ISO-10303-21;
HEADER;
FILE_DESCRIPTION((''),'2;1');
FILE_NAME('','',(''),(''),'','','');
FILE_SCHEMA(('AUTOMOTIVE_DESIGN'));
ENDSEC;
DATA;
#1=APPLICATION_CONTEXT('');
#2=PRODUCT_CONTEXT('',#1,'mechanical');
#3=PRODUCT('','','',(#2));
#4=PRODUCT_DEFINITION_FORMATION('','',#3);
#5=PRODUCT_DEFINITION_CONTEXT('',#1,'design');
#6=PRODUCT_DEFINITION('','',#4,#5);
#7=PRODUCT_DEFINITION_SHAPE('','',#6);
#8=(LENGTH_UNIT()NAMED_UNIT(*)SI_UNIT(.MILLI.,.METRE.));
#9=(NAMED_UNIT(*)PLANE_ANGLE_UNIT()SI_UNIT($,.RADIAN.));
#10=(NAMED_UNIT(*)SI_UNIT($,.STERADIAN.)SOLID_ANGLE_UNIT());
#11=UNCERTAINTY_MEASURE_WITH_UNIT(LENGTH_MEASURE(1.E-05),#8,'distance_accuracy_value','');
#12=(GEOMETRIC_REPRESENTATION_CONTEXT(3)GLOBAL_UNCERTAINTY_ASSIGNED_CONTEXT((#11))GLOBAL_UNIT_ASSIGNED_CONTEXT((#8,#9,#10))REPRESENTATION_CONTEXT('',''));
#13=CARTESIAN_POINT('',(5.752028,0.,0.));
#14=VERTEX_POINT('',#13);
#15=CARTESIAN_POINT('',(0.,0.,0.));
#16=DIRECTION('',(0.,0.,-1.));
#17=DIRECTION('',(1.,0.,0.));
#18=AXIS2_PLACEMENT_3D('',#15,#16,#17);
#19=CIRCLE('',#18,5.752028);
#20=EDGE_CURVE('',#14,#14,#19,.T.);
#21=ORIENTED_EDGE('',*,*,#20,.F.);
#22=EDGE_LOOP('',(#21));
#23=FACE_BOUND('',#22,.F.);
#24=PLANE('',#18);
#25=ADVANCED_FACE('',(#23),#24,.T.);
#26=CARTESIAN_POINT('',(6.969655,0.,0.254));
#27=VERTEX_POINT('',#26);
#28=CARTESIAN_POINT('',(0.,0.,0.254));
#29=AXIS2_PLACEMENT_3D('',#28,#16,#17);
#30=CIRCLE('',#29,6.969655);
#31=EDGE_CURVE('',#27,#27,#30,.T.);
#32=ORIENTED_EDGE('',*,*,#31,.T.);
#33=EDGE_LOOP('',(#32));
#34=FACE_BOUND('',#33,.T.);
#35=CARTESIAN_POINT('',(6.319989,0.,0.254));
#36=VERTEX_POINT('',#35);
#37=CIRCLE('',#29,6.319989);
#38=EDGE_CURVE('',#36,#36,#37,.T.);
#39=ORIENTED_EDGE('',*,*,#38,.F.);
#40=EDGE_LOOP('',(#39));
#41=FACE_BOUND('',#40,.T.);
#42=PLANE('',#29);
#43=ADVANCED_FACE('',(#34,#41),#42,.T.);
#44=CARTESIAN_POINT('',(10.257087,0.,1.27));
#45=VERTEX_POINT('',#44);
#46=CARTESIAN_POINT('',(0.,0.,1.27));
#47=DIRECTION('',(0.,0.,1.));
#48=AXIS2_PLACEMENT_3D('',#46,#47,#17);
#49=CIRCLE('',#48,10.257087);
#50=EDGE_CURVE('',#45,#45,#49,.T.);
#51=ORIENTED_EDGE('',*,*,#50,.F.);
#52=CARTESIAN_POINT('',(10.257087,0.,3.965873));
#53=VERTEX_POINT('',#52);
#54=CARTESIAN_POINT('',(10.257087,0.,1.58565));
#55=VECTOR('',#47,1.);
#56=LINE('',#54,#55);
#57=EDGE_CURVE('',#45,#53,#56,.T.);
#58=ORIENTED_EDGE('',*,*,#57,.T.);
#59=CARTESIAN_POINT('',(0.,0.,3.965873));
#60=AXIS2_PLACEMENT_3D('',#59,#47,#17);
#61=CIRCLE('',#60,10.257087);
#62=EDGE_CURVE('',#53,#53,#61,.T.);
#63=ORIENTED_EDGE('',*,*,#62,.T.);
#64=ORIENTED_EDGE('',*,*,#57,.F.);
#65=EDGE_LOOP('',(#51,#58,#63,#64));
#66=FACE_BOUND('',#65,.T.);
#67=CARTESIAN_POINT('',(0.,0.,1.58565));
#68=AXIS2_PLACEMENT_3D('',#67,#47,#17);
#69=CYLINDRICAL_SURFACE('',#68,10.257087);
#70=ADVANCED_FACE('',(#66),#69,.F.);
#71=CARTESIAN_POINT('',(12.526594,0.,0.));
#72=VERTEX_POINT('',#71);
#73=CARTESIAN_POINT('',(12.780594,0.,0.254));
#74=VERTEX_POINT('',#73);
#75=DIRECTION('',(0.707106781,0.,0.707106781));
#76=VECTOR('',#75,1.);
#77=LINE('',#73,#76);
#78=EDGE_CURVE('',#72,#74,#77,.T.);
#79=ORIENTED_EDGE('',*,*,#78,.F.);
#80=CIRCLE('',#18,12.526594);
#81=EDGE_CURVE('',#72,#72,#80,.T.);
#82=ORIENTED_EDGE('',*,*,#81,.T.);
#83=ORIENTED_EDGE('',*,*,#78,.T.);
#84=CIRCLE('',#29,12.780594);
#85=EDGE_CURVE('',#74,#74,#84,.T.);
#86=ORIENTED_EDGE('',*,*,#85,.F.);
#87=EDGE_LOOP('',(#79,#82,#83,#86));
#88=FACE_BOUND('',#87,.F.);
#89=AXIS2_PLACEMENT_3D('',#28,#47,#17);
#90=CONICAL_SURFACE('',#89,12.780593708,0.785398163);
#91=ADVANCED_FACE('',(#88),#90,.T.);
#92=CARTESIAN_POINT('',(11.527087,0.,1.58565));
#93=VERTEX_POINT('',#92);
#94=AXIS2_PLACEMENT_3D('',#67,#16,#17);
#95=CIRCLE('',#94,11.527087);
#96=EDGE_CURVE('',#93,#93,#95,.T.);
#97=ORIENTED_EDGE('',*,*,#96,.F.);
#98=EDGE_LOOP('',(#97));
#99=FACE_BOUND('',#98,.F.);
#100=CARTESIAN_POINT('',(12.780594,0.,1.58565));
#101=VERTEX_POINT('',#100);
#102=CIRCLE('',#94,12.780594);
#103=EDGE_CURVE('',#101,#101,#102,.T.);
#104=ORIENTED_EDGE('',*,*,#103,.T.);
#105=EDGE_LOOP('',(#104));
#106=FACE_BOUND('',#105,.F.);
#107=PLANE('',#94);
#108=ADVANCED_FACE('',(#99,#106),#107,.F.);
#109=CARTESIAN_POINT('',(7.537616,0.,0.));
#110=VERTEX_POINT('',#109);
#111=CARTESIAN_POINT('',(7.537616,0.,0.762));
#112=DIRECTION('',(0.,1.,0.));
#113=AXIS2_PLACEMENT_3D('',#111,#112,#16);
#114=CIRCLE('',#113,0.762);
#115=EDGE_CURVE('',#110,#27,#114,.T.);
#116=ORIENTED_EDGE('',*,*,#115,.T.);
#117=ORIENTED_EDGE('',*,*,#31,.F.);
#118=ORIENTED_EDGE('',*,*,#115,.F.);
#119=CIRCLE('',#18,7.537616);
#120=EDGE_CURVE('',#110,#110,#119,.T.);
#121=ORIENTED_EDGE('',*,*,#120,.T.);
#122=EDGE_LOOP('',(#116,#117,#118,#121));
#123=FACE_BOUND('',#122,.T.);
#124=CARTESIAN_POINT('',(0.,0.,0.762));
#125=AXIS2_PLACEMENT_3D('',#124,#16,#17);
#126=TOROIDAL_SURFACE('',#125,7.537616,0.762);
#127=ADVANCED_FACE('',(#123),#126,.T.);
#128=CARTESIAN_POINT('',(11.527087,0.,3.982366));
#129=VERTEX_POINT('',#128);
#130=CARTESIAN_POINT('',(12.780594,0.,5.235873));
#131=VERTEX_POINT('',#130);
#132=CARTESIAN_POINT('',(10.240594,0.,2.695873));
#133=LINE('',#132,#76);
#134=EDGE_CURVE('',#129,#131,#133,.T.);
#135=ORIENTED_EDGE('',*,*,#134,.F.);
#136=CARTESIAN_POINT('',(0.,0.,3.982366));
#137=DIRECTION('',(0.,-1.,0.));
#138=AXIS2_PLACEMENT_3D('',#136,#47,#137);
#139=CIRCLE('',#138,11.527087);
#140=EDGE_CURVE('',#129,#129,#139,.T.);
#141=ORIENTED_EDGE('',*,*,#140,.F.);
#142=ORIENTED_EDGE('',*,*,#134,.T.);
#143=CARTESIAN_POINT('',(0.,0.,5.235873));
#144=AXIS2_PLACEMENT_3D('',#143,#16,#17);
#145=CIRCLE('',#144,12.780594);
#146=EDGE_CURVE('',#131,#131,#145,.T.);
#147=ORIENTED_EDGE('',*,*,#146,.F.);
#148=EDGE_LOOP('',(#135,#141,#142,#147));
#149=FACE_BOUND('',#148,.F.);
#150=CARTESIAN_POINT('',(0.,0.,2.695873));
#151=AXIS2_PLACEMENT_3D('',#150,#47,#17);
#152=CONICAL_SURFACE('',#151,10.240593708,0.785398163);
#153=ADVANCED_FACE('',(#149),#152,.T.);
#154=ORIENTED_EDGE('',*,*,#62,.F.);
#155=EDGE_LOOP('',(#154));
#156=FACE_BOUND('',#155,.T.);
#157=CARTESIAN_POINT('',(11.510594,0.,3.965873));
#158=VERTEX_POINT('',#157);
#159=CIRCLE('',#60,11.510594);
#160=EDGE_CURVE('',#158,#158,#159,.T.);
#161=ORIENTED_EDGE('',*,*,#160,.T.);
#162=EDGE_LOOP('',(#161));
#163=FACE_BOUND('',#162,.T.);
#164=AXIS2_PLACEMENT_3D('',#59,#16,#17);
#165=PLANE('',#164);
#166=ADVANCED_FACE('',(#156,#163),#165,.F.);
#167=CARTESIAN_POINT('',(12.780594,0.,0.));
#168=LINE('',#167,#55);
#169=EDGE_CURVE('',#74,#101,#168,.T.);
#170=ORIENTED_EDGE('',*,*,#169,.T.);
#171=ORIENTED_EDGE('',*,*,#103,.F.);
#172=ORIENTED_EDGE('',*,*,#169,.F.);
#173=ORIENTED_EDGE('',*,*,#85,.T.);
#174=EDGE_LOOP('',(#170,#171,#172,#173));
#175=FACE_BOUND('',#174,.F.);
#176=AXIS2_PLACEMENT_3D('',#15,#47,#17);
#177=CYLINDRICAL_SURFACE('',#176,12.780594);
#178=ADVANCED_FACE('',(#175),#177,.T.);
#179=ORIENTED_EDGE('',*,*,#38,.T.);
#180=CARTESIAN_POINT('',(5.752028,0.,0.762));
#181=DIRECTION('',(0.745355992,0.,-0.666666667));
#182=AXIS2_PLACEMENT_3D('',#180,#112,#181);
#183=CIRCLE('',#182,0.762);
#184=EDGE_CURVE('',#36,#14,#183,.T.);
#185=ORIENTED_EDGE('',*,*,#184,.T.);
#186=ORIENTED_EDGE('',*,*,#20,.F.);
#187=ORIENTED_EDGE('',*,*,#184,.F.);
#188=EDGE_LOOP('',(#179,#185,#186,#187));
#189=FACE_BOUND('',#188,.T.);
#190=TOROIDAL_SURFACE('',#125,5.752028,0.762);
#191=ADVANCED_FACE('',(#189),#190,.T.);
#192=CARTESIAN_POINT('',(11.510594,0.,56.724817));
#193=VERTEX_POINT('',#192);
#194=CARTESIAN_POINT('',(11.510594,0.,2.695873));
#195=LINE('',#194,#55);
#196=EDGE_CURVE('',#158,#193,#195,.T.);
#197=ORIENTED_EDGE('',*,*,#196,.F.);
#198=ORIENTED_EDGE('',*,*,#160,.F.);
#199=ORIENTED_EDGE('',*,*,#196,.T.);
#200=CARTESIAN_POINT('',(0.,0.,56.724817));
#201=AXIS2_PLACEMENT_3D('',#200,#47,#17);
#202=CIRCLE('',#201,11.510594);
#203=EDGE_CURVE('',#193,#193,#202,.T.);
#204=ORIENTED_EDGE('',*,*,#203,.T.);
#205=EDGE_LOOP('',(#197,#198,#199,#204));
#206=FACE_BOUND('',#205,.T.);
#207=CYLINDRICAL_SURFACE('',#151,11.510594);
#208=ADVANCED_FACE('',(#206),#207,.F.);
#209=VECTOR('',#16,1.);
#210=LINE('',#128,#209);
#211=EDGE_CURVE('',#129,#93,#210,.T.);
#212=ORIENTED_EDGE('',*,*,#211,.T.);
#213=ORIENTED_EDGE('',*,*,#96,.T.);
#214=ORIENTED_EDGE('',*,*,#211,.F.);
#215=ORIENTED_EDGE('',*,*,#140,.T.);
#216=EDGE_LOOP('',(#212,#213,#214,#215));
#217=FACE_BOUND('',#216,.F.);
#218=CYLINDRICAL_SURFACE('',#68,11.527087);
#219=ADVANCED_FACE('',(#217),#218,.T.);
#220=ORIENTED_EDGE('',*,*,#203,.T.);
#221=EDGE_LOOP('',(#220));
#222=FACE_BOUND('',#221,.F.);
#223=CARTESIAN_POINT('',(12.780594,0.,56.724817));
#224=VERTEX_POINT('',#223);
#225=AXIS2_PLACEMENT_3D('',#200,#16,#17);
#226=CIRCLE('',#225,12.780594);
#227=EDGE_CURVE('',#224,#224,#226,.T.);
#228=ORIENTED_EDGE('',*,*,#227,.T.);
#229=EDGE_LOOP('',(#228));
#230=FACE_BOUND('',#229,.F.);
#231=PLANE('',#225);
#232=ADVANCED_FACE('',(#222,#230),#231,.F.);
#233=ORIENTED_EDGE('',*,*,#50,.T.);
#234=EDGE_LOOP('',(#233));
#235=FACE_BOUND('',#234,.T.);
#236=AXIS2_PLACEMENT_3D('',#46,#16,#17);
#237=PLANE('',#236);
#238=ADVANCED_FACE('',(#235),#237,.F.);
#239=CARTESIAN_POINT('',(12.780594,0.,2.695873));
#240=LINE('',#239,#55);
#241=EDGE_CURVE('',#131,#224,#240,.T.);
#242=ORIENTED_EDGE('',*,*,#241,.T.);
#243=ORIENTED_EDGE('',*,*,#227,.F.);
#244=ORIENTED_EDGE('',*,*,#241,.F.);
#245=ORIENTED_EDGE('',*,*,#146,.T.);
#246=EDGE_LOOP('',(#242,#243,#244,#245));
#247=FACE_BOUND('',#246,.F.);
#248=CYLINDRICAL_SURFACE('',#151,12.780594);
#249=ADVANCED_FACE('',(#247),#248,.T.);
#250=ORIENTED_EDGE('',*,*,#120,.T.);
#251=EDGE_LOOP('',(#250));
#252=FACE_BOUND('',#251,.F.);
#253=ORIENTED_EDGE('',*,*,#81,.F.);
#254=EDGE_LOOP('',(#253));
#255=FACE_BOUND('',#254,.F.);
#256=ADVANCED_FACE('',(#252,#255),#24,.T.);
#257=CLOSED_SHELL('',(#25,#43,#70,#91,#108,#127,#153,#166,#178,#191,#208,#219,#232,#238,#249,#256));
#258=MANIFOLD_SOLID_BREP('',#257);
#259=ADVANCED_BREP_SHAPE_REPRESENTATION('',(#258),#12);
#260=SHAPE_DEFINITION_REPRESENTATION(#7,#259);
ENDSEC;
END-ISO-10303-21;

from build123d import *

# Parameters (mm, degrees)
F2_T        = -1.27
F3_SIZE     = 0.254
F4_R        = 6.9696549561
F4_R_2      = 6.3199888533
F5_DEPTH    = 0.254
F7_S5_R     = 11.5270866081
F7_T6_DEPTH = 20


# Not quite as in the source:
# - a fillet or chamfer that OpenCascade refuses, or shapes differently, is made with other operations: its cross-section is extruded or revolved along the edge and cut away or added


with BuildPart() as f1:
    # F0 (on Front) → F1 (revolve)
    with BuildSketch(Plane.XZ):
        Polygon((0, 56.7248165607), (0, 0), (12.7805937082, 0), (12.7805937082, 1.5856500249), (11.5270866081, 1.5856500249), (11.5270866081, 2.6958733797), (12.7805937082, 2.6958733797), (12.7805937082, 56.7248165607), align=None)
    revolve(axis=Axis((0, 0, 24.1605676711), (0, 0, -1)))

    # F2
    f2_openings = [f1.faces().sort_by_distance(p)[0] for p in [
        (0, 0, 56.724817),
    ]]
    offset(amount=F2_T, openings=f2_openings, kind=Kind.INTERSECTION)

    # F3
    f3_edges = [f1.edges().sort_by_distance(p)[0] for p in [
        (-12.780594, 0, 0),
    ]]
    chamfer(f3_edges, length=F3_SIZE)

    # F4 (on face) → F5 (cut)
    with BuildSketch(Plane(origin=(0, 0, 0), x_dir=(1, 0, 0), z_dir=(0, 0, -1))):
        Circle(F4_R)
        Circle(F4_R_2, mode=Mode.SUBTRACT)
    extrude(amount=-F5_DEPTH, mode=Mode.SUBTRACT)

    # F6: fillet of radius 0.762 on 2 edges, made by hand

    # F6_s1 → F6_t2 (revolve, cut)
    with BuildSketch(Plane.XZ):
        with BuildLine():
            ThreePointArc((6.3199888533, 0.254), (6.0631127843, 0.066392352), (5.752027587, 0))
            Line((5.752027587, 0), (6.3199888533, 0))
            Line((6.3199888533, 0), (6.3199888533, 0.254))
        make_face()
    revolve(axis=Axis((0, 0, 0), (0, 0, -1)), mode=Mode.SUBTRACT)

    # F6_s3 → F6_t4 (revolve, cut)
    with BuildSketch(Plane.XZ):
        with BuildLine():
            ThreePointArc((7.5376162224, 0), (7.226531025, 0.066392352), (6.9696549561, 0.254))
            Line((6.9696549561, 0.254), (6.9696549561, 0))
            Line((6.9696549561, 0), (7.5376162224, 0))
        make_face()
    revolve(axis=Axis((0, 0, 0), (0, 0, -1)), mode=Mode.SUBTRACT)

    # F7: chamfer of 2.54 on 1 edges, made by hand


with BuildPart() as f7_tool2:
    # F7_s3 → F7_t4 (revolve)
    with BuildSketch(Plane.XZ):
        Polygon((10.2405937082, 2.6958733797), (12.7805937082, 5.2358733797), (12.7805937082, 2.6958733797), align=None)
    revolve(axis=Axis((0, 0, 2.6958733797), (0, 0, -1)))

    # F7_s5 → F7_t6 (cut, symmetric)
    with BuildSketch(Plane.XY.offset(4)):
        Circle(F7_S5_R)
    extrude(amount=F7_T6_DEPTH, both=True, mode=Mode.SUBTRACT)


with BuildPart() as f1_1:
    add(f1.part)

    # F7_t1: cut F7_tool2
    add(f7_tool2.part, mode=Mode.SUBTRACT)


solid = f1_1.part
